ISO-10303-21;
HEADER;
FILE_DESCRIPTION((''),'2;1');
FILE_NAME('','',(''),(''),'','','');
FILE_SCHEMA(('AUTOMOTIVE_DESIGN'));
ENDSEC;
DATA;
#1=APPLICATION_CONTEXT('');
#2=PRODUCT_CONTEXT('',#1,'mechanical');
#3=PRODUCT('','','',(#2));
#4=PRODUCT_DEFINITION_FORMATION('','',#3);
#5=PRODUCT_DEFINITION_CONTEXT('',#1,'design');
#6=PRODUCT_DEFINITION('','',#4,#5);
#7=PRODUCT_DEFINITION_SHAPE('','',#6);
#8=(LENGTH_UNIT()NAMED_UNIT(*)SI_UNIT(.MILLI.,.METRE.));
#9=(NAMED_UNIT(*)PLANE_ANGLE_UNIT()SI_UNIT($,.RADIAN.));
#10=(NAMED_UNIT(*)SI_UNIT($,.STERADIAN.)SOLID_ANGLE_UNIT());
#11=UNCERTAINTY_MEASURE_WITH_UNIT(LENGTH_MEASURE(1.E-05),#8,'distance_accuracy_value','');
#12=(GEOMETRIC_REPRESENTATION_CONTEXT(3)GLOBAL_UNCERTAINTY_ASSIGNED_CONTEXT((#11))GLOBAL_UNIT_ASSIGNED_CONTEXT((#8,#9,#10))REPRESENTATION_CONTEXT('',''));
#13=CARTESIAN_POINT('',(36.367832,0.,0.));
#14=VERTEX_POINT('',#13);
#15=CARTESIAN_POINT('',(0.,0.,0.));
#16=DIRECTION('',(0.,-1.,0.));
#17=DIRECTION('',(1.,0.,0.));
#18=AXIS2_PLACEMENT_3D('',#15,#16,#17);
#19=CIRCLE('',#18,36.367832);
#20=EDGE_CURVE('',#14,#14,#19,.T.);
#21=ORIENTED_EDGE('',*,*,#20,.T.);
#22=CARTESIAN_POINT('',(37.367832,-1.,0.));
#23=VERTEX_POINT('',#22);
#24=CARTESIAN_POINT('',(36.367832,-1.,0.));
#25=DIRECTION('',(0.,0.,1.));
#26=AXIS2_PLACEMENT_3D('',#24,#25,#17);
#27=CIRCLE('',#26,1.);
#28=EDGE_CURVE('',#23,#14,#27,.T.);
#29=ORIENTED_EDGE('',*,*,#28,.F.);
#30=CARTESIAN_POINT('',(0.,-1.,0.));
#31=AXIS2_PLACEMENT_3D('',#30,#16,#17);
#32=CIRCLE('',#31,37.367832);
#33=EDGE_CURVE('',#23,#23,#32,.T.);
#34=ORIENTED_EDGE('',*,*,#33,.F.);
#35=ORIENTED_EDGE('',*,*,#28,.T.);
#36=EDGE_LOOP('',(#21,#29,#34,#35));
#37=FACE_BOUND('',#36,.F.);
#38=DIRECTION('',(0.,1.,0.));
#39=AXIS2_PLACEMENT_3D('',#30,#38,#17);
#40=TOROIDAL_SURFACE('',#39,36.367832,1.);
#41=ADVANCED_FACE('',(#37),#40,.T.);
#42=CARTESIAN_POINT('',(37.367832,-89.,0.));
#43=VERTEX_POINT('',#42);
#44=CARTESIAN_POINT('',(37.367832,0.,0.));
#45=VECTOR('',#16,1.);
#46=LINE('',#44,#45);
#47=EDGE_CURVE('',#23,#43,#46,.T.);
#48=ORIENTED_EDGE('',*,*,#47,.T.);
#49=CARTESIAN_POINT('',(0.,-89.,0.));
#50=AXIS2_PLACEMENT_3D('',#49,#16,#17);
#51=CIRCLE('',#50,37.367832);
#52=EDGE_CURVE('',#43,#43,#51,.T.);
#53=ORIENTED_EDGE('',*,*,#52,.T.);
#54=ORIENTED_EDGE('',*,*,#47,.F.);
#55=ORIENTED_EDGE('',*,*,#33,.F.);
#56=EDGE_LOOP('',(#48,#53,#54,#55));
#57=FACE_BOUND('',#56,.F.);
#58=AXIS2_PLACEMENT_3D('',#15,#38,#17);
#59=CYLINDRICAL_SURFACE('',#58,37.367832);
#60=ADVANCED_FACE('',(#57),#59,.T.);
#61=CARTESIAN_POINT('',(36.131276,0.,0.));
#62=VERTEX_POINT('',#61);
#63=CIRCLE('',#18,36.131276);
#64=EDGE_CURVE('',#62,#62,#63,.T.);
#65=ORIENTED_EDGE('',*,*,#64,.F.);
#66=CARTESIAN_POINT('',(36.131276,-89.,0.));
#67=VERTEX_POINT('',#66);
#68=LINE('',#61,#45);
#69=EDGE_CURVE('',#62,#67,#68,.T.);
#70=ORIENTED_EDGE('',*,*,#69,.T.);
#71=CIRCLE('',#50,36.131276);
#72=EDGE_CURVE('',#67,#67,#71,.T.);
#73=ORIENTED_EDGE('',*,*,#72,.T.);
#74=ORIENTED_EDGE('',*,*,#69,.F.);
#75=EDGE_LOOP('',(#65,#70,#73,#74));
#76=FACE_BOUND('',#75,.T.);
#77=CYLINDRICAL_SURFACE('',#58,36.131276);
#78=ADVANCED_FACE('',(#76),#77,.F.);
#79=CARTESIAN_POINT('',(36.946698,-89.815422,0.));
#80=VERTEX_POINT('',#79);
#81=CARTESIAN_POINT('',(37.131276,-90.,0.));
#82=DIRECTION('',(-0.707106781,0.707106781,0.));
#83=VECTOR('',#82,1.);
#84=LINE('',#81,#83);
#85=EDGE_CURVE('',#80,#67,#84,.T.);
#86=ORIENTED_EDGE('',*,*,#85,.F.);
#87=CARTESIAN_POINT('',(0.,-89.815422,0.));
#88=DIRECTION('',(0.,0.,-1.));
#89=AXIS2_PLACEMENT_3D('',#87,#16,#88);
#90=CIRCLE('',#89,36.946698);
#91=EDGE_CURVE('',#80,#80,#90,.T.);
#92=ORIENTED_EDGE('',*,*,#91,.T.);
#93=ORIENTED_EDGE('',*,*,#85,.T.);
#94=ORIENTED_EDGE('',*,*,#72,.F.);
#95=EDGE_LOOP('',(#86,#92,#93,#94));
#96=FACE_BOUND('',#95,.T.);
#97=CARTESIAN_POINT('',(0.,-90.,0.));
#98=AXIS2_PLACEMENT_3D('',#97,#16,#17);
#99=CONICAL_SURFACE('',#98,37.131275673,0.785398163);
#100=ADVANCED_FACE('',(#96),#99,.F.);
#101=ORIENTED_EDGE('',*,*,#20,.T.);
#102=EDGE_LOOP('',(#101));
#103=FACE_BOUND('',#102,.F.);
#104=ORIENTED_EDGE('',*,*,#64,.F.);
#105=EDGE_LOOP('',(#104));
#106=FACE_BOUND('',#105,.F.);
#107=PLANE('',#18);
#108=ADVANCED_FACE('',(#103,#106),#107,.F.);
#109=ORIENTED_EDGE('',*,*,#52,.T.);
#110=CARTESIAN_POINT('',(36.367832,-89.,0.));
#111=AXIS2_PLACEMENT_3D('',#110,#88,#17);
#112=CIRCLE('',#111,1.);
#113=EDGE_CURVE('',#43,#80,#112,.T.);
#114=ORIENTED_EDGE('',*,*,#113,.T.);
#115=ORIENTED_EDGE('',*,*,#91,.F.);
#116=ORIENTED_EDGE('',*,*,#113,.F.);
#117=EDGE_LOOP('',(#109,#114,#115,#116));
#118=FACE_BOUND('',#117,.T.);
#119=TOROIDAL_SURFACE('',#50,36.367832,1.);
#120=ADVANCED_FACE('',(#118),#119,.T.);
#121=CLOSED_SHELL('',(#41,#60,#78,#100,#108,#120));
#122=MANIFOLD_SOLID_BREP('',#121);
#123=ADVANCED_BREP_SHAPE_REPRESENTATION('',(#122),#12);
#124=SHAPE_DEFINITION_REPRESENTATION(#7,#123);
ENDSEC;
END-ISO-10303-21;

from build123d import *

# Parameters (mm, degrees)
F0_R     = 37.3678316612
F0_R_2   = 36.1312756735
F1_DEPTH = 90
F2_R     = 1


# Not quite as in the source:
# - a fillet or chamfer that OpenCascade refuses, or shapes differently, is made with other operations: its cross-section is extruded or revolved along the edge and cut away or added


with BuildPart() as f1:
    # F0 (on Front) → F1 (new body)
    with BuildSketch(Plane.XZ):
        Circle(F0_R)
        Circle(F0_R_2, mode=Mode.SUBTRACT)
    extrude(amount=F1_DEPTH)

    # F2
    f2_edges = [f1.edges().sort_by_distance(p)[0] for p in [
        (37.367832, -45, 0),
        (-37.367832, 0, 0),
        (-37.367832, -90, 0),
    ]]
    fillet(f2_edges, radius=F2_R)

    # F3: chamfer of 1 on 2 edges, made by hand

    # F3_s1 → F3_t2 (revolve, cut)
    with BuildSketch(Plane.XY):
        Polygon((37.1312756735, -90), (36.1312756735, -89), (36.1312756735, -90), align=None)
    revolve(axis=Axis((0, -90, 0), (0, -1, 0)), mode=Mode.SUBTRACT)


solid = f1.part
